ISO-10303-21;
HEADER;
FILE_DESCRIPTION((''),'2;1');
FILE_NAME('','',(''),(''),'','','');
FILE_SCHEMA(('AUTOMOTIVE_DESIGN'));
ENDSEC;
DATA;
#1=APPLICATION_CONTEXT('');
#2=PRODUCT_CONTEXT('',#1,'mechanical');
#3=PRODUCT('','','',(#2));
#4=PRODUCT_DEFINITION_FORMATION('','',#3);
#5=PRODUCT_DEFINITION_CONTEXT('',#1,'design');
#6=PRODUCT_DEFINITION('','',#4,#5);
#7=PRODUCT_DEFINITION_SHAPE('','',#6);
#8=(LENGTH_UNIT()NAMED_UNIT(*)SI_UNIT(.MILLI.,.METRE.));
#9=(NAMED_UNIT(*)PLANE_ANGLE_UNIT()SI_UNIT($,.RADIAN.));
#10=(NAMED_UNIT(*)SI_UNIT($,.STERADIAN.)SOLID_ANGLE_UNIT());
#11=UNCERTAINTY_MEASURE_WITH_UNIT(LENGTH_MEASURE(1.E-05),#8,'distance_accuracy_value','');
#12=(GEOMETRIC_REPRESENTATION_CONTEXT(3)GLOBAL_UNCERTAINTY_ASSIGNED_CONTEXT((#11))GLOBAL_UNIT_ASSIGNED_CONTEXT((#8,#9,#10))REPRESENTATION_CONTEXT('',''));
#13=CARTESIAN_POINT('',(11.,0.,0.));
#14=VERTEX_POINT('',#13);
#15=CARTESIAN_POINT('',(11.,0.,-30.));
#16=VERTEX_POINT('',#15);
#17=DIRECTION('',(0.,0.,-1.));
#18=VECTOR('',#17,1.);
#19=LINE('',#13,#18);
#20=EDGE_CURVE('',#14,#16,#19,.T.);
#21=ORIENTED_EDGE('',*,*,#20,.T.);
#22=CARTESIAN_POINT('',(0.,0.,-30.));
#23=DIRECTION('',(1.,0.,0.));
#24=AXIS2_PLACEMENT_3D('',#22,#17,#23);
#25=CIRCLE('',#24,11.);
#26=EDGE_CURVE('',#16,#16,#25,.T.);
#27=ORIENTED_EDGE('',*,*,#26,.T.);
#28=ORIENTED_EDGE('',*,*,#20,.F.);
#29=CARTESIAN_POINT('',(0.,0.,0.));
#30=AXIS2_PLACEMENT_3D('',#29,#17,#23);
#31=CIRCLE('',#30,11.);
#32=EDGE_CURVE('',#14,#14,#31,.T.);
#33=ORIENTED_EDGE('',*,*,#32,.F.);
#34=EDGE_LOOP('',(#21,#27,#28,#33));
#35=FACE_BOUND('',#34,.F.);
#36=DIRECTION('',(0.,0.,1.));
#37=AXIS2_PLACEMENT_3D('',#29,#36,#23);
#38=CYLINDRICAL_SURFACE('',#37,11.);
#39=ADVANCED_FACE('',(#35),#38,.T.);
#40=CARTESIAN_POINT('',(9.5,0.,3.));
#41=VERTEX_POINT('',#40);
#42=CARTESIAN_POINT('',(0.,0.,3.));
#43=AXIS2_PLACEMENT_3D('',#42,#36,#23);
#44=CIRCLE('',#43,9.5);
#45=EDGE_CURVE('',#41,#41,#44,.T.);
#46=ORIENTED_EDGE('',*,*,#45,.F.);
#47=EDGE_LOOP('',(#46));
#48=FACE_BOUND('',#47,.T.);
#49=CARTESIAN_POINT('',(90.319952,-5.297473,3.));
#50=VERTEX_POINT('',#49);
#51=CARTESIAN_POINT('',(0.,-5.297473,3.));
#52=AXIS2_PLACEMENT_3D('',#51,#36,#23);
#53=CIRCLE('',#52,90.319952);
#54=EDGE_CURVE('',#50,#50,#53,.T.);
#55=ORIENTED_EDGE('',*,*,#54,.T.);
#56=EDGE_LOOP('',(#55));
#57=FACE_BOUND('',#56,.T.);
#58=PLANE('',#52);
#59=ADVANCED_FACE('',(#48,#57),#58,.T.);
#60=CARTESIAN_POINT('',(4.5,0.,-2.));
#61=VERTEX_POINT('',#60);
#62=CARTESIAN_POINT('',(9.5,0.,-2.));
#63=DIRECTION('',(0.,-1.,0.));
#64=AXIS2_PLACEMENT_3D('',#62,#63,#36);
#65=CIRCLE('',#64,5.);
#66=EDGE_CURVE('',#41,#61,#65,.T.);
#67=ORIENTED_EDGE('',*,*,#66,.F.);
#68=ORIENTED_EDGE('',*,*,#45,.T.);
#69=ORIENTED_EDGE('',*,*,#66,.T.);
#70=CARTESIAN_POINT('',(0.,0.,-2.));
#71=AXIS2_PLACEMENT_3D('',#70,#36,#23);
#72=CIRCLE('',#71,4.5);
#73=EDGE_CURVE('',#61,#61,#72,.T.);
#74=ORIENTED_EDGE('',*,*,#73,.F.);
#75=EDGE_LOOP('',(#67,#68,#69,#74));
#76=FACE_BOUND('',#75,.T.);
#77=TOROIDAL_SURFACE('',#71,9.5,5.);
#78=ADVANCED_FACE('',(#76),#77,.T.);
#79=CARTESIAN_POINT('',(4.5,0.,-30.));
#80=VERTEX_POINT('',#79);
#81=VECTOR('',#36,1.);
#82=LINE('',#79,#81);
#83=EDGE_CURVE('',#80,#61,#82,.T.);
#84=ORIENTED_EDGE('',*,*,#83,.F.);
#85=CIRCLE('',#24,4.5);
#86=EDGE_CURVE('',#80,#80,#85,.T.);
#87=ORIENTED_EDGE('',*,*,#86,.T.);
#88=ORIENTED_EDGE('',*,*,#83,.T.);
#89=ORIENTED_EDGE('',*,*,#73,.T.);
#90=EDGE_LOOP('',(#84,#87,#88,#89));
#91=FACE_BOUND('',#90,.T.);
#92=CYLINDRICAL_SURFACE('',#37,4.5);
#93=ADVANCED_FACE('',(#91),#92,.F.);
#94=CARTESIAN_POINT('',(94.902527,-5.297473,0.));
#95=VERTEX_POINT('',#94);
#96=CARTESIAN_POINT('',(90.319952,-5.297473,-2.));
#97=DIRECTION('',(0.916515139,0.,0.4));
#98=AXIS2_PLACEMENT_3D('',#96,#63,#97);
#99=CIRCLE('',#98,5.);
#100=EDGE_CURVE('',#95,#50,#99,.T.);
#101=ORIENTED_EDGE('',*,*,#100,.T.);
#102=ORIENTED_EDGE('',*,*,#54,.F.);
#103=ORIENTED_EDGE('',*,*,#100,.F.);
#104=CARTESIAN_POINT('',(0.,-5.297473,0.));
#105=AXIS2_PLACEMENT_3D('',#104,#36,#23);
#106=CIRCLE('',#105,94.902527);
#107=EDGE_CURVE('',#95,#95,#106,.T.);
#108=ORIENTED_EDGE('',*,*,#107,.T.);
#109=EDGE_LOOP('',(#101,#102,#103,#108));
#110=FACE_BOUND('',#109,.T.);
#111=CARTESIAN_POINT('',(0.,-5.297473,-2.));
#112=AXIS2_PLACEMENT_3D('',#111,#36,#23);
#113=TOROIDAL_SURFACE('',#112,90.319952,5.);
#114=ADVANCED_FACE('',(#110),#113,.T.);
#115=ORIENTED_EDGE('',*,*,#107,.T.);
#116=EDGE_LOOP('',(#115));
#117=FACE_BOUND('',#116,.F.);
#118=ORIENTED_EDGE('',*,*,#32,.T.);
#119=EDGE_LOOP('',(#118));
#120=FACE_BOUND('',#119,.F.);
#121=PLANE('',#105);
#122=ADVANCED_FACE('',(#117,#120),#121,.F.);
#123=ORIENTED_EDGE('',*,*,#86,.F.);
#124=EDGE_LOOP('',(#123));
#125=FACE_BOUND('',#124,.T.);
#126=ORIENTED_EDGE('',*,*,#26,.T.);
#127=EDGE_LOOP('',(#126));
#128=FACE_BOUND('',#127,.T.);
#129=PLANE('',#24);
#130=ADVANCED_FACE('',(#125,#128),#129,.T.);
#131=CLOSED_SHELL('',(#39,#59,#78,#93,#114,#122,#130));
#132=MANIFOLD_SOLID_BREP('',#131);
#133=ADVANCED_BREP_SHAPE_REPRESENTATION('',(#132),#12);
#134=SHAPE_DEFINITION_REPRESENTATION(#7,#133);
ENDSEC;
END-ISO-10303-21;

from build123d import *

# Parameters (mm, degrees)
F0_R     = 94.9025273368
F0_R_2   = 4.5
F1_DEPTH = 3
F2_R     = 11
F2_R_2   = 4.5
F3_DEPTH = 30


# Not quite as in the source:
# - a fillet or chamfer that OpenCascade refuses, or shapes differently, is made with other operations: its cross-section is extruded or revolved along the edge and cut away or added


with BuildPart() as f1:
    # F0 (on Top) → F1 (new body)
    with BuildSketch(Plane.XY):
        with Locations((0, -5.2974726632)):
            Circle(F0_R)
        Circle(F0_R_2, mode=Mode.SUBTRACT)
    extrude(amount=F1_DEPTH)

    # F2 (on face) → F3 (join)
    with BuildSketch(Plane(origin=(0, 0, 0), x_dir=(1, 0, 0), z_dir=(0, 0, -1))):
        Circle(F2_R)
        Circle(F2_R_2, mode=Mode.SUBTRACT)
    extrude(amount=F3_DEPTH)

    # F4: fillet of radius 5 on 2 edges, made by hand

    # F4_s1 → F4_t2 (revolve, cut)
    with BuildSketch(Plane.XZ.offset(5.2974726632)):
        with BuildLine():
            ThreePointArc((94.9025273368, 0), (93.0585644294, 2.1833001327), (90.3199516419, 3))
            Line((90.3199516419, 3), (94.9025273368, 3))
            Line((94.9025273368, 3), (94.9025273368, 0))
        make_face()
    revolve(axis=Axis((0, -5.2974726632, 3), (0, 0, 1)), mode=Mode.SUBTRACT)

    # F4_s3 → F4_t4 (revolve, cut)
    with BuildSketch(Plane.XZ):
        with BuildLine():
            ThreePointArc((9.5, 3), (5.9644660941, 1.5355339059), (4.5, -2))
            Line((4.5, -2), (4.5, 3))
            Line((4.5, 3), (9.5, 3))
        make_face()
    revolve(axis=Axis((0, 0, 3), (0, 0, 1)), mode=Mode.SUBTRACT)


solid = f1.part
